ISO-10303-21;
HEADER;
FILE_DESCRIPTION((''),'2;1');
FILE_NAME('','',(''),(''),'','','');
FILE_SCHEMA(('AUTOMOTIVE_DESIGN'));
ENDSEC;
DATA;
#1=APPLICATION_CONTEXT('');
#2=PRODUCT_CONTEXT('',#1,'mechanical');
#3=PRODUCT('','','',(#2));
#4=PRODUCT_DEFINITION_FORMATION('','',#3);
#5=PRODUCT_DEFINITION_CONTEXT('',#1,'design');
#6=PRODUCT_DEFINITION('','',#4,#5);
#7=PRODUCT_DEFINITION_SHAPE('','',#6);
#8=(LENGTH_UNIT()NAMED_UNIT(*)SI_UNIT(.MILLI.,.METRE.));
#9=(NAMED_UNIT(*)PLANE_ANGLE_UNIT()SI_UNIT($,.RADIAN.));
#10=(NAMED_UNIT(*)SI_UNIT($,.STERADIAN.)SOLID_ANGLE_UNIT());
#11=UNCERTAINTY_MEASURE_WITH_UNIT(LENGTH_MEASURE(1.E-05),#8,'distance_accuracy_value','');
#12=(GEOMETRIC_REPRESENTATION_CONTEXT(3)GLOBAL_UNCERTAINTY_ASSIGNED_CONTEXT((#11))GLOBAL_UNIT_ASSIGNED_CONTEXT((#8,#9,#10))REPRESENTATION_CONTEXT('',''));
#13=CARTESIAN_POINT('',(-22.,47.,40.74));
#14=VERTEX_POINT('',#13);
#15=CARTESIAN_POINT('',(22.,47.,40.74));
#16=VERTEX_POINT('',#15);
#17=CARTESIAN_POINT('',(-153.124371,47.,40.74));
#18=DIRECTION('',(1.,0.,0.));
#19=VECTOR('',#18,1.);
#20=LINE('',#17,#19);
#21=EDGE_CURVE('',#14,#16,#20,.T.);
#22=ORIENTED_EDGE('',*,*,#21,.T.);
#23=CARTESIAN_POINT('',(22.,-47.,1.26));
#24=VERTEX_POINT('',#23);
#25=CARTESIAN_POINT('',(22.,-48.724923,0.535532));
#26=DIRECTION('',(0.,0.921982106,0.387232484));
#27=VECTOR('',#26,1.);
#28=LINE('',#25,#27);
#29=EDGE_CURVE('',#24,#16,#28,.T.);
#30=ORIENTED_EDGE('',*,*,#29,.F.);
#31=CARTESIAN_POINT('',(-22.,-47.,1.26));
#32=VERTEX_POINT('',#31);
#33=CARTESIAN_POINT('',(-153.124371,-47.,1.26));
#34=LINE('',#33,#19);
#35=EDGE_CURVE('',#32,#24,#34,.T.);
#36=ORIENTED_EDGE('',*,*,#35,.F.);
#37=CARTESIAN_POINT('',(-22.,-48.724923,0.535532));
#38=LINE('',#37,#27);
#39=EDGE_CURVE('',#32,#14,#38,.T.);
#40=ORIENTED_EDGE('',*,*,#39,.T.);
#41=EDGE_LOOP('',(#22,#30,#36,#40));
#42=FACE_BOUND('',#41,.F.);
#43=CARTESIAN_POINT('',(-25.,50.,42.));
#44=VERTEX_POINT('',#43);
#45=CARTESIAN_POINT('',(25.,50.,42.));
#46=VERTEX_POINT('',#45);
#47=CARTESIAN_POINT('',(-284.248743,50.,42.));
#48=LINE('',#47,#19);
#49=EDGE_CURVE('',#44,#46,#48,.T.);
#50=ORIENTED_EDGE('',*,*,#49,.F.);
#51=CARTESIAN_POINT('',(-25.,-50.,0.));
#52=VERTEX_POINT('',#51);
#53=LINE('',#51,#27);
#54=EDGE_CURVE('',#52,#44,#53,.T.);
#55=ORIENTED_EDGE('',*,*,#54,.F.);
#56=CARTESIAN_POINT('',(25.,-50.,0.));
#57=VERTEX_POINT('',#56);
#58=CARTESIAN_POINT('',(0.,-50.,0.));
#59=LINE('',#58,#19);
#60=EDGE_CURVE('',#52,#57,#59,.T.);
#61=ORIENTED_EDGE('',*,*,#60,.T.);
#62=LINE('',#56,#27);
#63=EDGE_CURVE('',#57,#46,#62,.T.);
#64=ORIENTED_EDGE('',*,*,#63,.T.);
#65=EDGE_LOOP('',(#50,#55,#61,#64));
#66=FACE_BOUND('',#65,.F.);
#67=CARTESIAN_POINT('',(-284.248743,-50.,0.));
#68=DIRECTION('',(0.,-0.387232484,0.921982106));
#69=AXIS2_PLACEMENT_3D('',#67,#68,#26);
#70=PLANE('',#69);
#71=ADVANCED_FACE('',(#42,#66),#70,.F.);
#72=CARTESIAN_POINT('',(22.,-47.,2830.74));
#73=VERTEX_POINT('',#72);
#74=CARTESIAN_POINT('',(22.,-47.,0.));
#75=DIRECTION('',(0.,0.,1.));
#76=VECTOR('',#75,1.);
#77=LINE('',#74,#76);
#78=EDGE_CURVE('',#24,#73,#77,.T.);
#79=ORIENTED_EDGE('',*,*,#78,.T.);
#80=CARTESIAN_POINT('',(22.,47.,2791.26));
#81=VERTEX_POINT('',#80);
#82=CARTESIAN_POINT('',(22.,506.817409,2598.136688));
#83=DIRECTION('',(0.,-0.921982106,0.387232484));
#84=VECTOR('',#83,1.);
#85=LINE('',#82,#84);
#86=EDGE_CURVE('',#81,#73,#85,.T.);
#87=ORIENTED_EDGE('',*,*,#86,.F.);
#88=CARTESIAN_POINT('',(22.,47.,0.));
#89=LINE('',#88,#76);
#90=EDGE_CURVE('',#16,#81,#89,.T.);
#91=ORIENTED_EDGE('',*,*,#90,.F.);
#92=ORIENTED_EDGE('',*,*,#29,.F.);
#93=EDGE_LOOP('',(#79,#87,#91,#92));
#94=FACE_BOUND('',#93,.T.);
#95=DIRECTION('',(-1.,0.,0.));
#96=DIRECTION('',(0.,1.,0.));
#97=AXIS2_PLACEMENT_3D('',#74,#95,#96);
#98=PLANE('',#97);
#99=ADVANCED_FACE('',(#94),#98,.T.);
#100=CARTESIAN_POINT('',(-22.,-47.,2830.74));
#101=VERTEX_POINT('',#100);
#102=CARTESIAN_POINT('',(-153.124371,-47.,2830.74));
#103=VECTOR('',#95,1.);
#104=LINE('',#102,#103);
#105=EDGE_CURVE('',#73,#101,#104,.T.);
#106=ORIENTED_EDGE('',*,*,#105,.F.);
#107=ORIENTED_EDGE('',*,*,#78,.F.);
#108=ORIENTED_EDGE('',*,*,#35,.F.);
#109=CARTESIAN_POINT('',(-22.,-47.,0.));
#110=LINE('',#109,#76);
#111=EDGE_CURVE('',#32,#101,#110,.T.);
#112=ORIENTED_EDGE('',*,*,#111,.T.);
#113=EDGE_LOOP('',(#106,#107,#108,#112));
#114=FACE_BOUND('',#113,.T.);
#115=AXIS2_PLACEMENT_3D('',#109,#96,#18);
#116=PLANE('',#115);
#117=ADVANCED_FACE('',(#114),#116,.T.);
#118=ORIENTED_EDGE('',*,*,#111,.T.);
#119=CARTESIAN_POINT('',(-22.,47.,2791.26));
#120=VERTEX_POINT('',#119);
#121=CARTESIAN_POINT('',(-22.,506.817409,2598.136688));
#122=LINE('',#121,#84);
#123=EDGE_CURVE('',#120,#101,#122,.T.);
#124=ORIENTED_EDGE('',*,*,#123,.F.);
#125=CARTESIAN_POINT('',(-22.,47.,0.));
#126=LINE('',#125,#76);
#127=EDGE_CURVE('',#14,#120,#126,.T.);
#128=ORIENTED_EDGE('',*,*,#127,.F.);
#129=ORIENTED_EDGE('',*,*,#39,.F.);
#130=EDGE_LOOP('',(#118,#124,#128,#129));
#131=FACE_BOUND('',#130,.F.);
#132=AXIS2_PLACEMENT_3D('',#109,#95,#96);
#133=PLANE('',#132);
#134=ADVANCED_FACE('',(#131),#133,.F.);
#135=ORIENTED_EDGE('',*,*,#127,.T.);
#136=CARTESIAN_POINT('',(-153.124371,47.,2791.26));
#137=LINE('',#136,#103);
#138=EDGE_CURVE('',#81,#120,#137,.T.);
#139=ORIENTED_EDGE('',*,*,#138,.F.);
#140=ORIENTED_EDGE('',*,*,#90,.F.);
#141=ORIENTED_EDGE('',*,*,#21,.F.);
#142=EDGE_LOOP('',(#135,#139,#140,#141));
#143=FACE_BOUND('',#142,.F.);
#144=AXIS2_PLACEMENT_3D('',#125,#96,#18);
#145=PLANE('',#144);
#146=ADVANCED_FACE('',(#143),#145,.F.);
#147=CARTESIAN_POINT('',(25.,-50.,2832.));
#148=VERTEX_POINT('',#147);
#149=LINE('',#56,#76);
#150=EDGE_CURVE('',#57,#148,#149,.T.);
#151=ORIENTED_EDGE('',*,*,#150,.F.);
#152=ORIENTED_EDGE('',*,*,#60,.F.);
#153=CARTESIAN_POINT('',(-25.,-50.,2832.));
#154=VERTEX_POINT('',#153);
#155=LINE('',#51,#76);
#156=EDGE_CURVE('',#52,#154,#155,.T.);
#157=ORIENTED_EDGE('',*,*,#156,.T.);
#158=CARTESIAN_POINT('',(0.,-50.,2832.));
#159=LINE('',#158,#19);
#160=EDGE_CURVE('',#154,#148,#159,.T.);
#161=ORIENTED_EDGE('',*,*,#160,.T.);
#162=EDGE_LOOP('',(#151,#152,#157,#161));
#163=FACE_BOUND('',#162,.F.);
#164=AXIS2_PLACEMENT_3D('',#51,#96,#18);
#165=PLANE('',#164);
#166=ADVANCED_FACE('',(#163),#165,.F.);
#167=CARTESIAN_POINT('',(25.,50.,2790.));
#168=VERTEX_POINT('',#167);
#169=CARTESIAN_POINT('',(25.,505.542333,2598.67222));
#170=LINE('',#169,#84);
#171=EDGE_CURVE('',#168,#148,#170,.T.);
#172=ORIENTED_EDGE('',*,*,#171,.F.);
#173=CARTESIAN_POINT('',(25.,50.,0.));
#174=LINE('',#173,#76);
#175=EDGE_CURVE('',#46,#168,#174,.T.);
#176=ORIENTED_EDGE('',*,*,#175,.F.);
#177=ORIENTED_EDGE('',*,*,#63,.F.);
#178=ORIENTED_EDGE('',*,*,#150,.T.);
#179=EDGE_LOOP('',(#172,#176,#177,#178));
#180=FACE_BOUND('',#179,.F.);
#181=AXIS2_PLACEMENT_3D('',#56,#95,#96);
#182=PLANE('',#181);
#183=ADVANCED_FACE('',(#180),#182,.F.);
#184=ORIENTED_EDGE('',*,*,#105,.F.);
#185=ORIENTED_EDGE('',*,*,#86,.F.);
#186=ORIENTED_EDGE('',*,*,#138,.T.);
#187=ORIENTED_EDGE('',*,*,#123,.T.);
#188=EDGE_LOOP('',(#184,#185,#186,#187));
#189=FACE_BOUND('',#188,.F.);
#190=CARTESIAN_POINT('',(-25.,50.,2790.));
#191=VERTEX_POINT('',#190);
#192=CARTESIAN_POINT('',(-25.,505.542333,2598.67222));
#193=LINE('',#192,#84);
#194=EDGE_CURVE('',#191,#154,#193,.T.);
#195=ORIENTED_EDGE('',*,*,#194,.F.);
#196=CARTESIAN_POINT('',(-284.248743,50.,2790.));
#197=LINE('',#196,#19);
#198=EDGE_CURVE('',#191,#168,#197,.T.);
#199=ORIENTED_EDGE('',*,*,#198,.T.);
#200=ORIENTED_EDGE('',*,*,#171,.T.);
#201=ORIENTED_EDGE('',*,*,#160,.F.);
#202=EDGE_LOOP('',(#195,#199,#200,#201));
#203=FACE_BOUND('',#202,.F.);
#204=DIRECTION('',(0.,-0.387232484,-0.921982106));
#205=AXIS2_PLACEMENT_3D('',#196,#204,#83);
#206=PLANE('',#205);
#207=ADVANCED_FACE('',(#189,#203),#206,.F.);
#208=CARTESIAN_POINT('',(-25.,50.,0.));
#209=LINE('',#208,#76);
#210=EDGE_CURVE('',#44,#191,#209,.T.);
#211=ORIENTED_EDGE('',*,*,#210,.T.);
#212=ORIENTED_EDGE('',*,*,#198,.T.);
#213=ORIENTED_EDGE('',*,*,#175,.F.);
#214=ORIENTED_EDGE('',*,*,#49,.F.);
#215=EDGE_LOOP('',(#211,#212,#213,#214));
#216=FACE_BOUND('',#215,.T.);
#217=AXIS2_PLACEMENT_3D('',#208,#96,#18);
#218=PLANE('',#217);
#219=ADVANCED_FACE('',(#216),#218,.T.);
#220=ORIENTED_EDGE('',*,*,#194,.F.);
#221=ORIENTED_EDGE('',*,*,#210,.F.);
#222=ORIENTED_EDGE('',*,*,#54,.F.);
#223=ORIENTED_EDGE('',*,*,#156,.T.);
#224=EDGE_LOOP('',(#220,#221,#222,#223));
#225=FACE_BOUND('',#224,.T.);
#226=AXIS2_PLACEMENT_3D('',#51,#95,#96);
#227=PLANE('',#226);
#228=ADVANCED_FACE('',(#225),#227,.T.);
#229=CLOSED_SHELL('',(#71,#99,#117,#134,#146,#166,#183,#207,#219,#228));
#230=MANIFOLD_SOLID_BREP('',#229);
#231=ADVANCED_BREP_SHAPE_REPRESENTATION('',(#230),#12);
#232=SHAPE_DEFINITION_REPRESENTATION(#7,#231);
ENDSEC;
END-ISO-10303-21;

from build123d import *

# Parameters (mm, degrees)
F0_W        = 50
F0_H        = 100
F0_W_2      = 44
F0_H_2      = 94
F1_DEPTH    = 2832
F2_T1_DEPTH = 568.4974851551
F3_T1_DEPTH = 568.4974851551


# Not quite as in the source:
# - a fillet or chamfer that OpenCascade refuses, or shapes differently, is made with other operations: its cross-section is extruded or revolved along the edge and cut away or added


with BuildPart() as f1:
    # F0 (on Top) → F1 (new body)
    with BuildSketch(Plane.XY):
        Rectangle(F0_W, F0_H)
        Rectangle(F0_W_2, F0_H_2, mode=Mode.SUBTRACT)
    extrude(amount=F1_DEPTH)

    # F2: chamfer of 100 x 42 on 1 edges, made by hand

    # F2_s2 → F2_t1 (cut)
    with BuildSketch(Plane.YZ.offset(-284.2487425775)):
        Polygon((50, 2790), (-50, 2832), (50, 2832), align=None)
    extrude(amount=F2_T1_DEPTH, mode=Mode.SUBTRACT)

    # F3: chamfer of 42 x 100 on 1 edges, made by hand

    # F3_s2 → F3_t1 (cut)
    with BuildSketch(Plane.YZ.offset(-284.2487425775)):
        Polygon((-50, 0), (50, 42), (50, 0), align=None)
    extrude(amount=F3_T1_DEPTH, mode=Mode.SUBTRACT)


solid = f1.part
